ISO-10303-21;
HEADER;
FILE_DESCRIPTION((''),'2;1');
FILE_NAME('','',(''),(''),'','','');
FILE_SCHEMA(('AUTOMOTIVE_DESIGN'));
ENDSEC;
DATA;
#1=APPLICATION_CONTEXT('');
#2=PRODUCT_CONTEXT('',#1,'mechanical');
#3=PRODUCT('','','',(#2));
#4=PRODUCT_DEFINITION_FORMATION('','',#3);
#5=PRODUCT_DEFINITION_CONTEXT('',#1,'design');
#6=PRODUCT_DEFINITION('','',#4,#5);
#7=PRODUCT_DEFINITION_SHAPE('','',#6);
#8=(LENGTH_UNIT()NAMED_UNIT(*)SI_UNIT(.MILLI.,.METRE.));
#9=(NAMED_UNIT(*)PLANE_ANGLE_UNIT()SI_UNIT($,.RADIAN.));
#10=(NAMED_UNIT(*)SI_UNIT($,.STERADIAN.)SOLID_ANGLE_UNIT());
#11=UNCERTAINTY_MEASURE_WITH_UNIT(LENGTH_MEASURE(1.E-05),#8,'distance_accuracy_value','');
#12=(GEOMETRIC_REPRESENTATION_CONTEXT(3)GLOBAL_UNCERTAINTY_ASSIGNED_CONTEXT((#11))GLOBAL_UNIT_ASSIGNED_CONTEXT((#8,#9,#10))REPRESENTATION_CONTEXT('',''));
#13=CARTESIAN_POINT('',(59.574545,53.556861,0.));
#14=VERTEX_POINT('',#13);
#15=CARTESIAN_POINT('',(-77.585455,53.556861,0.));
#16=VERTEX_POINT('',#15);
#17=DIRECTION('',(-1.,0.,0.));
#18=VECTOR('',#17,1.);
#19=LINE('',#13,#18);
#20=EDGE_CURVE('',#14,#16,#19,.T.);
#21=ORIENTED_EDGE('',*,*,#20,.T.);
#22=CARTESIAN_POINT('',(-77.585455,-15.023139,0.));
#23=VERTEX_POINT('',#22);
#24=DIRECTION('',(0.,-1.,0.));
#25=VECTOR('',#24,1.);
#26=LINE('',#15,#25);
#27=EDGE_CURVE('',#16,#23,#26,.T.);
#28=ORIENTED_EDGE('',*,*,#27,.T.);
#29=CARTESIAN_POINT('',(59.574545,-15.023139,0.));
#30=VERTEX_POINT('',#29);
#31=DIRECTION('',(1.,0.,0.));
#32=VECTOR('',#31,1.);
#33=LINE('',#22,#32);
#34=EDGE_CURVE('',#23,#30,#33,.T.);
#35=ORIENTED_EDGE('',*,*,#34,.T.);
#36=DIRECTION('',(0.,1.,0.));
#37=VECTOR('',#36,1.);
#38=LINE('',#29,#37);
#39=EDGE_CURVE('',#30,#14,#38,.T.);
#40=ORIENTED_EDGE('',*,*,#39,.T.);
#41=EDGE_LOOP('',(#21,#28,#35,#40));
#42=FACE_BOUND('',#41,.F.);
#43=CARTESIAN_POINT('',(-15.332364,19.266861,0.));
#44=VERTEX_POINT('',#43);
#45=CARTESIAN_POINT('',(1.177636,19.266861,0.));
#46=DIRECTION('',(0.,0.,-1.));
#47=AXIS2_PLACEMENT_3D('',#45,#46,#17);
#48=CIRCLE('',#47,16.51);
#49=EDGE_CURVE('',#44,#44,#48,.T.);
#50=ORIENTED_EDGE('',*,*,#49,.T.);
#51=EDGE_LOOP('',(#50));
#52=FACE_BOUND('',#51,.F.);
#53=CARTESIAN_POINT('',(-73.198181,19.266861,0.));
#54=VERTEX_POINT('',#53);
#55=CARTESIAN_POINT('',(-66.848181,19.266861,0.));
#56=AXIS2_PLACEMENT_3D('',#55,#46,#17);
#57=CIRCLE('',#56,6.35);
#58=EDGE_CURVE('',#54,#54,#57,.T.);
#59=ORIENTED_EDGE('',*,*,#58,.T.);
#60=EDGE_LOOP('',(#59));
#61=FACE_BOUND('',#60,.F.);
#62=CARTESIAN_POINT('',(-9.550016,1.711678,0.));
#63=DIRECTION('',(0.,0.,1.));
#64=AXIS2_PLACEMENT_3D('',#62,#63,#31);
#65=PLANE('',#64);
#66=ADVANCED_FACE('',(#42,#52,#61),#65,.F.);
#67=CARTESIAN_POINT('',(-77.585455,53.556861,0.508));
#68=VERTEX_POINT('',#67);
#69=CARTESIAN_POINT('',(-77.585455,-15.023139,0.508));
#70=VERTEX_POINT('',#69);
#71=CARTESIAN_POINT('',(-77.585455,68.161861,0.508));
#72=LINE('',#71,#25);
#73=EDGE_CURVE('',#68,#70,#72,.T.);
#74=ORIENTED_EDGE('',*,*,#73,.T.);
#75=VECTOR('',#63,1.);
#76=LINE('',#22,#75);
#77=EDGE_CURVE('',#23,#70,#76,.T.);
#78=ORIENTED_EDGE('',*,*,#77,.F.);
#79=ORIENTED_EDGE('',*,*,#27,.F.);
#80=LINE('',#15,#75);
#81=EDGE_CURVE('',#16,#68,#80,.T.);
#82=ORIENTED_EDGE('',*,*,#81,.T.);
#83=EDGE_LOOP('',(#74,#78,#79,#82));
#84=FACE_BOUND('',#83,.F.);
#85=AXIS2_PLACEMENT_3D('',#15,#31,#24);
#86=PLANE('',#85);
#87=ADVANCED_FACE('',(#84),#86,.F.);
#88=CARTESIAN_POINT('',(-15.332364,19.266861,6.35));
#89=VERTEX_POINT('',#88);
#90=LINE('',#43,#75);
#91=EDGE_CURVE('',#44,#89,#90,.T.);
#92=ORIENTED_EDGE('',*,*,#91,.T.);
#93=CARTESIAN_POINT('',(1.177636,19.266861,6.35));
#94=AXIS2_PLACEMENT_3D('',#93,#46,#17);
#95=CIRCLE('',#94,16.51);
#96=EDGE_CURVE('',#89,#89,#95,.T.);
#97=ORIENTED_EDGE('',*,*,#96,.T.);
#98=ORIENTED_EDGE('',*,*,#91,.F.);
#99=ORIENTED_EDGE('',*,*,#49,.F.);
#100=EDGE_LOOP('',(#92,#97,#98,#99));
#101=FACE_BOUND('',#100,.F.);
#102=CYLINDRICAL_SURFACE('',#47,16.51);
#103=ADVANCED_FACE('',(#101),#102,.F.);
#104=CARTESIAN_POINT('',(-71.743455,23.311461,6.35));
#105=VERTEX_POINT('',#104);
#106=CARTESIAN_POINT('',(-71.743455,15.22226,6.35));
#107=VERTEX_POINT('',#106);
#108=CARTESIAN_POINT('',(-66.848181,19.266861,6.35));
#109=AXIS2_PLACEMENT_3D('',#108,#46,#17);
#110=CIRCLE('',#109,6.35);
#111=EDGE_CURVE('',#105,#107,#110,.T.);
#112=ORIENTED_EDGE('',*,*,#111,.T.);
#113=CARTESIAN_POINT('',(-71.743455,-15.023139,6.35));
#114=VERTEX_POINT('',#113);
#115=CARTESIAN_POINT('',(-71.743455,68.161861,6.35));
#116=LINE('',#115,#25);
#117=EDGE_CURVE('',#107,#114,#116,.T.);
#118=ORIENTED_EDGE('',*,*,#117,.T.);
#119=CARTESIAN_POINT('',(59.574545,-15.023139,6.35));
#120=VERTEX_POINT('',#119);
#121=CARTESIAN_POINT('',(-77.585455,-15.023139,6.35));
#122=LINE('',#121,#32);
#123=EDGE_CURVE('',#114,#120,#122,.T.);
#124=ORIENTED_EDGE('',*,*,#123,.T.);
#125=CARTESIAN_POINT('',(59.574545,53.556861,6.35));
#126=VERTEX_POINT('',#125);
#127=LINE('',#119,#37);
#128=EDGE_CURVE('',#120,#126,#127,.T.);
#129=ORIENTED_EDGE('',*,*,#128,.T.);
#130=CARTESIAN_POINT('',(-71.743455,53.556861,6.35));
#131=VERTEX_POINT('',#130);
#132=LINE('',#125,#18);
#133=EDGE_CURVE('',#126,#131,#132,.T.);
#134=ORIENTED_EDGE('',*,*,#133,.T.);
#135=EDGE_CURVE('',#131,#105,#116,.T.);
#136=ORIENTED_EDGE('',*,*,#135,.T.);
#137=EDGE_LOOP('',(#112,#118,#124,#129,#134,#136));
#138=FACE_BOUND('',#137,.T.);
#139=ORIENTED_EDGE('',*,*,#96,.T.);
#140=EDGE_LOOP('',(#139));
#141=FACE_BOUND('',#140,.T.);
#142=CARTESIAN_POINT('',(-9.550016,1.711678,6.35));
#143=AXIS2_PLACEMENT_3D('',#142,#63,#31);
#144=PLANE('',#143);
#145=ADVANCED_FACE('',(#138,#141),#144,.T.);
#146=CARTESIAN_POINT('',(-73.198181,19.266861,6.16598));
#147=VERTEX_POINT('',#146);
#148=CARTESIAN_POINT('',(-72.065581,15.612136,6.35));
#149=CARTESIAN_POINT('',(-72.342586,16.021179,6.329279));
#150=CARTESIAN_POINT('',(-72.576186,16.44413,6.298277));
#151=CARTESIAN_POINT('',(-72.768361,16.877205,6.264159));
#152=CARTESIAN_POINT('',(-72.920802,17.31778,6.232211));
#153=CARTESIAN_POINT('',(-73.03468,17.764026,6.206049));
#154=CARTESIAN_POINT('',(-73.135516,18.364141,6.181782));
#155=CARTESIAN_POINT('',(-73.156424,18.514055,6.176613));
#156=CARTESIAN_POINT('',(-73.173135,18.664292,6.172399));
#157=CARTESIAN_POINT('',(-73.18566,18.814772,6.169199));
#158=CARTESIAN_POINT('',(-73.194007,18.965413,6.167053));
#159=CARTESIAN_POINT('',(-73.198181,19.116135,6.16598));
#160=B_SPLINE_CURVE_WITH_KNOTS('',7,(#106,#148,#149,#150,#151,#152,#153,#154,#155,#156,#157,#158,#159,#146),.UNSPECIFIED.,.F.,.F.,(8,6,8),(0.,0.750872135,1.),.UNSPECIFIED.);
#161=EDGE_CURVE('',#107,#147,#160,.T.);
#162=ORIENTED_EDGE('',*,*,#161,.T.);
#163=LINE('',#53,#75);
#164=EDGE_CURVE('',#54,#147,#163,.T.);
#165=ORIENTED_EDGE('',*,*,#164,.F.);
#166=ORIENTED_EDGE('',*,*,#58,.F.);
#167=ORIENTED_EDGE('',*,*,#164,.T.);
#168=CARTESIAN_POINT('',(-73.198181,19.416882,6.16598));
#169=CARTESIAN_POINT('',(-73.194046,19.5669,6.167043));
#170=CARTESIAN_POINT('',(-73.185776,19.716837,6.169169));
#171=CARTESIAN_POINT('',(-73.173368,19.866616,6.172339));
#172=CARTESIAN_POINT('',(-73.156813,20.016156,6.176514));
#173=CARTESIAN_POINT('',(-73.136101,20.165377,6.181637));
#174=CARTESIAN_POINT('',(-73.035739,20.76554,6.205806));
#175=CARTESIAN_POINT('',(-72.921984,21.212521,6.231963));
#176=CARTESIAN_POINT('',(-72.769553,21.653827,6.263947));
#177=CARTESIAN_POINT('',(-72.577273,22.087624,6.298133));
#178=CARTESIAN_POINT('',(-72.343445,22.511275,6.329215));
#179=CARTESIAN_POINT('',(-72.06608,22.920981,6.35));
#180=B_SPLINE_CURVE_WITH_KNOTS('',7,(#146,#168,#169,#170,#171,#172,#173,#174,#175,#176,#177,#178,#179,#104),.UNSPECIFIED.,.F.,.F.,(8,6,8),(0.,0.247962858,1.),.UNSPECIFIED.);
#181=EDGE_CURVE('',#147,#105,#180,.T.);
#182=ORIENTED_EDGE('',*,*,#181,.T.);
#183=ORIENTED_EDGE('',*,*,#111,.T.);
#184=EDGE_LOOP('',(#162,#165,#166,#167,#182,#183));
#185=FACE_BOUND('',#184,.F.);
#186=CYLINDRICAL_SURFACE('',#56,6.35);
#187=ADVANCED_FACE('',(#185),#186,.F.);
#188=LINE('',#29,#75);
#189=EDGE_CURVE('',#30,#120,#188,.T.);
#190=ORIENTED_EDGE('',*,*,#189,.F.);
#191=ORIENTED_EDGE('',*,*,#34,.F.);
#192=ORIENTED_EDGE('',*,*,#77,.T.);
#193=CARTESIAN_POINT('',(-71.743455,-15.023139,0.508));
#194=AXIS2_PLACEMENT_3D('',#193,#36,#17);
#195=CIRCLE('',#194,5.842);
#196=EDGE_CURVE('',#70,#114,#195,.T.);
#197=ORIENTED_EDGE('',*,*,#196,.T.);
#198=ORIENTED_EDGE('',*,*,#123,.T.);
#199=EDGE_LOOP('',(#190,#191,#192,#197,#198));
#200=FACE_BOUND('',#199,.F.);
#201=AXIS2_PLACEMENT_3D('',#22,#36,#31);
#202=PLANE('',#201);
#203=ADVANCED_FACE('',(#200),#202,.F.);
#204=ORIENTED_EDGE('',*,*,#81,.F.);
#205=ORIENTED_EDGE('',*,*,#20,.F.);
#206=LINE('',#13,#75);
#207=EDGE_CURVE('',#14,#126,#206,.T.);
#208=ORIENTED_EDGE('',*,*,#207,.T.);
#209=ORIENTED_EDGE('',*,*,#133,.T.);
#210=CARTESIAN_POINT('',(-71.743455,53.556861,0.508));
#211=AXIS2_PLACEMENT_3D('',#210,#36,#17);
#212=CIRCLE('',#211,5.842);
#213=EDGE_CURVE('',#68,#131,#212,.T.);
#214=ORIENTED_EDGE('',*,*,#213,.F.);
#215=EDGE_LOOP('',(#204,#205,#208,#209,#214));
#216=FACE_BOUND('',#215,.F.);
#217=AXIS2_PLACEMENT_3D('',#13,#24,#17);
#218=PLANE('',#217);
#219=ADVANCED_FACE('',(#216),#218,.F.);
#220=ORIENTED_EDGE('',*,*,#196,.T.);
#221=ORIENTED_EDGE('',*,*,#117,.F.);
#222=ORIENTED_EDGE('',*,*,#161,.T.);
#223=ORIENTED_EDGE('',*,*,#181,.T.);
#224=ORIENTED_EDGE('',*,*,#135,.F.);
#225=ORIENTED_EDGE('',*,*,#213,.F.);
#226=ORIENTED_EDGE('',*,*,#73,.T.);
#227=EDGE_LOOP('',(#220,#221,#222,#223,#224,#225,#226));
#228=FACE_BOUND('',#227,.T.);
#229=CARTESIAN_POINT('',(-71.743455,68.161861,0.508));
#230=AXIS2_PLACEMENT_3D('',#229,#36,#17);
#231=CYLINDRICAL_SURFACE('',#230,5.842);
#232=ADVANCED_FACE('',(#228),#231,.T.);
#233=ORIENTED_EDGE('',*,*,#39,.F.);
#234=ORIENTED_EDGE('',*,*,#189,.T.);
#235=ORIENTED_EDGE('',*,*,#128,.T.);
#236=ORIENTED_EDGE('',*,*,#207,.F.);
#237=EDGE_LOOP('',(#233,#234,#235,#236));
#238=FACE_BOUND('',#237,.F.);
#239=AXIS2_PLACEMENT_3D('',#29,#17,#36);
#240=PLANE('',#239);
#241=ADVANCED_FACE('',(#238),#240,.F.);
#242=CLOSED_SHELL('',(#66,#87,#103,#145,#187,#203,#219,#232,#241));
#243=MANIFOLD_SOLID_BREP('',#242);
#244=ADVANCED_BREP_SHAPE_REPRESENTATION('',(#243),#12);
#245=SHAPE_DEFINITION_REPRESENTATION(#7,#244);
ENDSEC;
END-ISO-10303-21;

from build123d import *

# Parameters (mm, degrees)
F1_DEPTH    = 6.35
F2_T1_DEPTH = 97.79


# Not quite as in the source:
# - a fillet or chamfer that OpenCascade refuses, or shapes differently, is made with other operations: its cross-section is extruded or revolved along the edge and cut away or added


with BuildPart() as f1:
    # F0 (on Top) → F1 (new body)
    with BuildSketch(Plane.XY):
        with BuildLine():
            Line((-77.5854553002, 19.2668606828), (-77.5854553002, -15.0231393172))
            Line((-77.5854553002, -15.0231393172), (59.5745446998, -15.0231393172))
            Line((59.5745446998, -15.0231393172), (59.5745446998, 19.2668606828))
            Line((59.5745446998, 19.2668606828), (17.687636208, 19.2668606828))
            ThreePointArc((17.687636208, 19.2668606828), (1.177636208, 2.7568606828), (-15.332363792, 19.2668606828))
            Line((-15.332363792, 19.2668606828), (-60.4981811881, 19.2668606828))
            ThreePointArc((-60.4981811881, 19.2668606828), (-66.8481811881, 12.9168606828), (-73.1981811881, 19.2668606828))
            Line((-73.1981811881, 19.2668606828), (-77.5854553002, 19.2668606828))
        make_face()
        with BuildLine():
            Line((-77.5854553002, 53.5568606828), (-77.5854553002, 19.2668606828))
            Line((-77.5854553002, 19.2668606828), (-73.1981811881, 19.2668606828))
            ThreePointArc((-73.1981811881, 19.2668606828), (-66.8481811881, 25.6168606828), (-60.4981811881, 19.2668606828))
            Line((-60.4981811881, 19.2668606828), (-15.332363792, 19.2668606828))
            ThreePointArc((-15.332363792, 19.2668606828), (1.177636208, 35.7768606828), (17.687636208, 19.2668606828))
            Line((17.687636208, 19.2668606828), (59.5745446998, 19.2668606828))
            Line((59.5745446998, 19.2668606828), (59.5745446998, 53.5568606828))
            Line((59.5745446998, 53.5568606828), (-77.5854553002, 53.5568606828))
        make_face()
    extrude(amount=F1_DEPTH)

    # F2: fillet of radius 5.842 on 1 edges, made by hand

    # F2_s2 → F2_t1 (cut)
    with BuildSketch(Plane.XZ.offset(-68.1618606828)):
        with BuildLine():
            ThreePointArc((-77.5854553002, 0.508), (-75.8743731159, 4.6389178157), (-71.7434553002, 6.35))
            Line((-71.7434553002, 6.35), (-77.5854553002, 6.35))
            Line((-77.5854553002, 6.35), (-77.5854553002, 0.508))
        make_face()
    extrude(amount=F2_T1_DEPTH, mode=Mode.SUBTRACT)


solid = f1.part
